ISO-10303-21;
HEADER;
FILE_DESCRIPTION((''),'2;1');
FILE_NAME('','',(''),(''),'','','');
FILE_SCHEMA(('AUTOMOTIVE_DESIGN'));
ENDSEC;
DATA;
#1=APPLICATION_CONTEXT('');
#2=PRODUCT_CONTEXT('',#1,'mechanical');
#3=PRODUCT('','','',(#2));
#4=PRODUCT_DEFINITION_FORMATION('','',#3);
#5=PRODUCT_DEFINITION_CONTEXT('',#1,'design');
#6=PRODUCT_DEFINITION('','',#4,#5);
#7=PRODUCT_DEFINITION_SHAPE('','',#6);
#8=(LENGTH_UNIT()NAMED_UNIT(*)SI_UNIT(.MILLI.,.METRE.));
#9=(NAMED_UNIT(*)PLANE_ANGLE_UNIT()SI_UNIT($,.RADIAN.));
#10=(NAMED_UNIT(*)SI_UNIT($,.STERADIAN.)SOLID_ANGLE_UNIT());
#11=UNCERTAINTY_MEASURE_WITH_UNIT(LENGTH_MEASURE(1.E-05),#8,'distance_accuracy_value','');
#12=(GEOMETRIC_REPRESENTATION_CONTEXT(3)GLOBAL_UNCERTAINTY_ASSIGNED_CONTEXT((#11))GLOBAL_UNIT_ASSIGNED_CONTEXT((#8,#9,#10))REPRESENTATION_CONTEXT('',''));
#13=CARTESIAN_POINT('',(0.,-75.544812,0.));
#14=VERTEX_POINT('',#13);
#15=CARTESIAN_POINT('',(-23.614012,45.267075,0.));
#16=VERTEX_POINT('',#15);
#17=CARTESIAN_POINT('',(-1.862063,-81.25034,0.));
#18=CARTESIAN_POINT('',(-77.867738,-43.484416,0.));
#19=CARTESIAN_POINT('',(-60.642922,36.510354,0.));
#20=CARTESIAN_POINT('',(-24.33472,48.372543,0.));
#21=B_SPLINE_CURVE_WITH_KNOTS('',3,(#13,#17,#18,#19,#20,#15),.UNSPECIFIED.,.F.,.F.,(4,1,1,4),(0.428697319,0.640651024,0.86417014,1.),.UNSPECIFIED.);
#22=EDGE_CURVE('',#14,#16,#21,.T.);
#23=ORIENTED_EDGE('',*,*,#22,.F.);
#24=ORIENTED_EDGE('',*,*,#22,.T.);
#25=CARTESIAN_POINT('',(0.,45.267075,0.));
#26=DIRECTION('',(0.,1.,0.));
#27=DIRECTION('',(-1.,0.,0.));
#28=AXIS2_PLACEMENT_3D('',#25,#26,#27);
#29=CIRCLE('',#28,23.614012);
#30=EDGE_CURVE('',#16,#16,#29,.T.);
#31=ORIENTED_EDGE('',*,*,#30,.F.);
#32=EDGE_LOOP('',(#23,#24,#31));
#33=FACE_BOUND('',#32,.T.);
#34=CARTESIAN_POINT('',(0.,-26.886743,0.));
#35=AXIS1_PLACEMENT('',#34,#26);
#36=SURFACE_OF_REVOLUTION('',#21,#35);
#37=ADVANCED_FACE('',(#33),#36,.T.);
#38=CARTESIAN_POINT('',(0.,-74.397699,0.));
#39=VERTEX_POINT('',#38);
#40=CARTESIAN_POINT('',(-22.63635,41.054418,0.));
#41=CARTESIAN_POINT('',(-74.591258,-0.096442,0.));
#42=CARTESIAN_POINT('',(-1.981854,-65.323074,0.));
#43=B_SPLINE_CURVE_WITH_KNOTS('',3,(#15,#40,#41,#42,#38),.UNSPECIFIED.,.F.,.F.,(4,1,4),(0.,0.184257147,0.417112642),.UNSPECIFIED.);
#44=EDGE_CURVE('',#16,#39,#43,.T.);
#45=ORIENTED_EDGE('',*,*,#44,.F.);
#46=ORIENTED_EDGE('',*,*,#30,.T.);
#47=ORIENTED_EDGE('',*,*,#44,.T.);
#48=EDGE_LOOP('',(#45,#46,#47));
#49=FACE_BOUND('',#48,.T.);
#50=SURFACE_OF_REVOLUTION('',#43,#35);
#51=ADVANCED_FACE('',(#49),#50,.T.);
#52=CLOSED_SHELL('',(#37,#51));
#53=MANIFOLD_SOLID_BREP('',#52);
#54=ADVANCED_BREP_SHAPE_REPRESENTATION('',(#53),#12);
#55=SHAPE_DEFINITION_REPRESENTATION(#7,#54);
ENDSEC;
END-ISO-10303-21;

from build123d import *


with BuildPart() as f0:
    # F1 (on Top) → F0 (revolve)
    with BuildSketch(Plane.XY):
        with BuildLine():
            add(Edge.make_bspline(
                [(0, -75.5448117852), (-1.8620630786, -81.250339653), (-77.8677379206, -43.4844162391), (-60.6429222345, 36.5103540419), (-24.3347199185, 48.3725431206), (-23.6140117049, 45.2670753002)],
                knots=[0.4286973187, 0.4286973187, 0.4286973187, 0.4286973187, 0.6406510243, 0.8641701403, 1, 1, 1, 1], degree=3))
            Line((0, -75.5448117852), (0, -74.3976985995))
            add(Edge.make_bspline(
                [(-23.6140117049, 45.2670753002), (-22.6363500957, 41.0544180698), (-74.5912576464, -0.0964419028), (-1.9818544789, -65.3230744632), (0, -74.3976985995)],
                knots=[0, 0, 0, 0, 0.1842571469, 0.4171126423, 0.4171126423, 0.4171126423, 0.4171126423], degree=3))
        make_face()
    revolve(axis=Axis((0, -26.8867425621, 0), (0, 1, 0)))


solid = f0.part
